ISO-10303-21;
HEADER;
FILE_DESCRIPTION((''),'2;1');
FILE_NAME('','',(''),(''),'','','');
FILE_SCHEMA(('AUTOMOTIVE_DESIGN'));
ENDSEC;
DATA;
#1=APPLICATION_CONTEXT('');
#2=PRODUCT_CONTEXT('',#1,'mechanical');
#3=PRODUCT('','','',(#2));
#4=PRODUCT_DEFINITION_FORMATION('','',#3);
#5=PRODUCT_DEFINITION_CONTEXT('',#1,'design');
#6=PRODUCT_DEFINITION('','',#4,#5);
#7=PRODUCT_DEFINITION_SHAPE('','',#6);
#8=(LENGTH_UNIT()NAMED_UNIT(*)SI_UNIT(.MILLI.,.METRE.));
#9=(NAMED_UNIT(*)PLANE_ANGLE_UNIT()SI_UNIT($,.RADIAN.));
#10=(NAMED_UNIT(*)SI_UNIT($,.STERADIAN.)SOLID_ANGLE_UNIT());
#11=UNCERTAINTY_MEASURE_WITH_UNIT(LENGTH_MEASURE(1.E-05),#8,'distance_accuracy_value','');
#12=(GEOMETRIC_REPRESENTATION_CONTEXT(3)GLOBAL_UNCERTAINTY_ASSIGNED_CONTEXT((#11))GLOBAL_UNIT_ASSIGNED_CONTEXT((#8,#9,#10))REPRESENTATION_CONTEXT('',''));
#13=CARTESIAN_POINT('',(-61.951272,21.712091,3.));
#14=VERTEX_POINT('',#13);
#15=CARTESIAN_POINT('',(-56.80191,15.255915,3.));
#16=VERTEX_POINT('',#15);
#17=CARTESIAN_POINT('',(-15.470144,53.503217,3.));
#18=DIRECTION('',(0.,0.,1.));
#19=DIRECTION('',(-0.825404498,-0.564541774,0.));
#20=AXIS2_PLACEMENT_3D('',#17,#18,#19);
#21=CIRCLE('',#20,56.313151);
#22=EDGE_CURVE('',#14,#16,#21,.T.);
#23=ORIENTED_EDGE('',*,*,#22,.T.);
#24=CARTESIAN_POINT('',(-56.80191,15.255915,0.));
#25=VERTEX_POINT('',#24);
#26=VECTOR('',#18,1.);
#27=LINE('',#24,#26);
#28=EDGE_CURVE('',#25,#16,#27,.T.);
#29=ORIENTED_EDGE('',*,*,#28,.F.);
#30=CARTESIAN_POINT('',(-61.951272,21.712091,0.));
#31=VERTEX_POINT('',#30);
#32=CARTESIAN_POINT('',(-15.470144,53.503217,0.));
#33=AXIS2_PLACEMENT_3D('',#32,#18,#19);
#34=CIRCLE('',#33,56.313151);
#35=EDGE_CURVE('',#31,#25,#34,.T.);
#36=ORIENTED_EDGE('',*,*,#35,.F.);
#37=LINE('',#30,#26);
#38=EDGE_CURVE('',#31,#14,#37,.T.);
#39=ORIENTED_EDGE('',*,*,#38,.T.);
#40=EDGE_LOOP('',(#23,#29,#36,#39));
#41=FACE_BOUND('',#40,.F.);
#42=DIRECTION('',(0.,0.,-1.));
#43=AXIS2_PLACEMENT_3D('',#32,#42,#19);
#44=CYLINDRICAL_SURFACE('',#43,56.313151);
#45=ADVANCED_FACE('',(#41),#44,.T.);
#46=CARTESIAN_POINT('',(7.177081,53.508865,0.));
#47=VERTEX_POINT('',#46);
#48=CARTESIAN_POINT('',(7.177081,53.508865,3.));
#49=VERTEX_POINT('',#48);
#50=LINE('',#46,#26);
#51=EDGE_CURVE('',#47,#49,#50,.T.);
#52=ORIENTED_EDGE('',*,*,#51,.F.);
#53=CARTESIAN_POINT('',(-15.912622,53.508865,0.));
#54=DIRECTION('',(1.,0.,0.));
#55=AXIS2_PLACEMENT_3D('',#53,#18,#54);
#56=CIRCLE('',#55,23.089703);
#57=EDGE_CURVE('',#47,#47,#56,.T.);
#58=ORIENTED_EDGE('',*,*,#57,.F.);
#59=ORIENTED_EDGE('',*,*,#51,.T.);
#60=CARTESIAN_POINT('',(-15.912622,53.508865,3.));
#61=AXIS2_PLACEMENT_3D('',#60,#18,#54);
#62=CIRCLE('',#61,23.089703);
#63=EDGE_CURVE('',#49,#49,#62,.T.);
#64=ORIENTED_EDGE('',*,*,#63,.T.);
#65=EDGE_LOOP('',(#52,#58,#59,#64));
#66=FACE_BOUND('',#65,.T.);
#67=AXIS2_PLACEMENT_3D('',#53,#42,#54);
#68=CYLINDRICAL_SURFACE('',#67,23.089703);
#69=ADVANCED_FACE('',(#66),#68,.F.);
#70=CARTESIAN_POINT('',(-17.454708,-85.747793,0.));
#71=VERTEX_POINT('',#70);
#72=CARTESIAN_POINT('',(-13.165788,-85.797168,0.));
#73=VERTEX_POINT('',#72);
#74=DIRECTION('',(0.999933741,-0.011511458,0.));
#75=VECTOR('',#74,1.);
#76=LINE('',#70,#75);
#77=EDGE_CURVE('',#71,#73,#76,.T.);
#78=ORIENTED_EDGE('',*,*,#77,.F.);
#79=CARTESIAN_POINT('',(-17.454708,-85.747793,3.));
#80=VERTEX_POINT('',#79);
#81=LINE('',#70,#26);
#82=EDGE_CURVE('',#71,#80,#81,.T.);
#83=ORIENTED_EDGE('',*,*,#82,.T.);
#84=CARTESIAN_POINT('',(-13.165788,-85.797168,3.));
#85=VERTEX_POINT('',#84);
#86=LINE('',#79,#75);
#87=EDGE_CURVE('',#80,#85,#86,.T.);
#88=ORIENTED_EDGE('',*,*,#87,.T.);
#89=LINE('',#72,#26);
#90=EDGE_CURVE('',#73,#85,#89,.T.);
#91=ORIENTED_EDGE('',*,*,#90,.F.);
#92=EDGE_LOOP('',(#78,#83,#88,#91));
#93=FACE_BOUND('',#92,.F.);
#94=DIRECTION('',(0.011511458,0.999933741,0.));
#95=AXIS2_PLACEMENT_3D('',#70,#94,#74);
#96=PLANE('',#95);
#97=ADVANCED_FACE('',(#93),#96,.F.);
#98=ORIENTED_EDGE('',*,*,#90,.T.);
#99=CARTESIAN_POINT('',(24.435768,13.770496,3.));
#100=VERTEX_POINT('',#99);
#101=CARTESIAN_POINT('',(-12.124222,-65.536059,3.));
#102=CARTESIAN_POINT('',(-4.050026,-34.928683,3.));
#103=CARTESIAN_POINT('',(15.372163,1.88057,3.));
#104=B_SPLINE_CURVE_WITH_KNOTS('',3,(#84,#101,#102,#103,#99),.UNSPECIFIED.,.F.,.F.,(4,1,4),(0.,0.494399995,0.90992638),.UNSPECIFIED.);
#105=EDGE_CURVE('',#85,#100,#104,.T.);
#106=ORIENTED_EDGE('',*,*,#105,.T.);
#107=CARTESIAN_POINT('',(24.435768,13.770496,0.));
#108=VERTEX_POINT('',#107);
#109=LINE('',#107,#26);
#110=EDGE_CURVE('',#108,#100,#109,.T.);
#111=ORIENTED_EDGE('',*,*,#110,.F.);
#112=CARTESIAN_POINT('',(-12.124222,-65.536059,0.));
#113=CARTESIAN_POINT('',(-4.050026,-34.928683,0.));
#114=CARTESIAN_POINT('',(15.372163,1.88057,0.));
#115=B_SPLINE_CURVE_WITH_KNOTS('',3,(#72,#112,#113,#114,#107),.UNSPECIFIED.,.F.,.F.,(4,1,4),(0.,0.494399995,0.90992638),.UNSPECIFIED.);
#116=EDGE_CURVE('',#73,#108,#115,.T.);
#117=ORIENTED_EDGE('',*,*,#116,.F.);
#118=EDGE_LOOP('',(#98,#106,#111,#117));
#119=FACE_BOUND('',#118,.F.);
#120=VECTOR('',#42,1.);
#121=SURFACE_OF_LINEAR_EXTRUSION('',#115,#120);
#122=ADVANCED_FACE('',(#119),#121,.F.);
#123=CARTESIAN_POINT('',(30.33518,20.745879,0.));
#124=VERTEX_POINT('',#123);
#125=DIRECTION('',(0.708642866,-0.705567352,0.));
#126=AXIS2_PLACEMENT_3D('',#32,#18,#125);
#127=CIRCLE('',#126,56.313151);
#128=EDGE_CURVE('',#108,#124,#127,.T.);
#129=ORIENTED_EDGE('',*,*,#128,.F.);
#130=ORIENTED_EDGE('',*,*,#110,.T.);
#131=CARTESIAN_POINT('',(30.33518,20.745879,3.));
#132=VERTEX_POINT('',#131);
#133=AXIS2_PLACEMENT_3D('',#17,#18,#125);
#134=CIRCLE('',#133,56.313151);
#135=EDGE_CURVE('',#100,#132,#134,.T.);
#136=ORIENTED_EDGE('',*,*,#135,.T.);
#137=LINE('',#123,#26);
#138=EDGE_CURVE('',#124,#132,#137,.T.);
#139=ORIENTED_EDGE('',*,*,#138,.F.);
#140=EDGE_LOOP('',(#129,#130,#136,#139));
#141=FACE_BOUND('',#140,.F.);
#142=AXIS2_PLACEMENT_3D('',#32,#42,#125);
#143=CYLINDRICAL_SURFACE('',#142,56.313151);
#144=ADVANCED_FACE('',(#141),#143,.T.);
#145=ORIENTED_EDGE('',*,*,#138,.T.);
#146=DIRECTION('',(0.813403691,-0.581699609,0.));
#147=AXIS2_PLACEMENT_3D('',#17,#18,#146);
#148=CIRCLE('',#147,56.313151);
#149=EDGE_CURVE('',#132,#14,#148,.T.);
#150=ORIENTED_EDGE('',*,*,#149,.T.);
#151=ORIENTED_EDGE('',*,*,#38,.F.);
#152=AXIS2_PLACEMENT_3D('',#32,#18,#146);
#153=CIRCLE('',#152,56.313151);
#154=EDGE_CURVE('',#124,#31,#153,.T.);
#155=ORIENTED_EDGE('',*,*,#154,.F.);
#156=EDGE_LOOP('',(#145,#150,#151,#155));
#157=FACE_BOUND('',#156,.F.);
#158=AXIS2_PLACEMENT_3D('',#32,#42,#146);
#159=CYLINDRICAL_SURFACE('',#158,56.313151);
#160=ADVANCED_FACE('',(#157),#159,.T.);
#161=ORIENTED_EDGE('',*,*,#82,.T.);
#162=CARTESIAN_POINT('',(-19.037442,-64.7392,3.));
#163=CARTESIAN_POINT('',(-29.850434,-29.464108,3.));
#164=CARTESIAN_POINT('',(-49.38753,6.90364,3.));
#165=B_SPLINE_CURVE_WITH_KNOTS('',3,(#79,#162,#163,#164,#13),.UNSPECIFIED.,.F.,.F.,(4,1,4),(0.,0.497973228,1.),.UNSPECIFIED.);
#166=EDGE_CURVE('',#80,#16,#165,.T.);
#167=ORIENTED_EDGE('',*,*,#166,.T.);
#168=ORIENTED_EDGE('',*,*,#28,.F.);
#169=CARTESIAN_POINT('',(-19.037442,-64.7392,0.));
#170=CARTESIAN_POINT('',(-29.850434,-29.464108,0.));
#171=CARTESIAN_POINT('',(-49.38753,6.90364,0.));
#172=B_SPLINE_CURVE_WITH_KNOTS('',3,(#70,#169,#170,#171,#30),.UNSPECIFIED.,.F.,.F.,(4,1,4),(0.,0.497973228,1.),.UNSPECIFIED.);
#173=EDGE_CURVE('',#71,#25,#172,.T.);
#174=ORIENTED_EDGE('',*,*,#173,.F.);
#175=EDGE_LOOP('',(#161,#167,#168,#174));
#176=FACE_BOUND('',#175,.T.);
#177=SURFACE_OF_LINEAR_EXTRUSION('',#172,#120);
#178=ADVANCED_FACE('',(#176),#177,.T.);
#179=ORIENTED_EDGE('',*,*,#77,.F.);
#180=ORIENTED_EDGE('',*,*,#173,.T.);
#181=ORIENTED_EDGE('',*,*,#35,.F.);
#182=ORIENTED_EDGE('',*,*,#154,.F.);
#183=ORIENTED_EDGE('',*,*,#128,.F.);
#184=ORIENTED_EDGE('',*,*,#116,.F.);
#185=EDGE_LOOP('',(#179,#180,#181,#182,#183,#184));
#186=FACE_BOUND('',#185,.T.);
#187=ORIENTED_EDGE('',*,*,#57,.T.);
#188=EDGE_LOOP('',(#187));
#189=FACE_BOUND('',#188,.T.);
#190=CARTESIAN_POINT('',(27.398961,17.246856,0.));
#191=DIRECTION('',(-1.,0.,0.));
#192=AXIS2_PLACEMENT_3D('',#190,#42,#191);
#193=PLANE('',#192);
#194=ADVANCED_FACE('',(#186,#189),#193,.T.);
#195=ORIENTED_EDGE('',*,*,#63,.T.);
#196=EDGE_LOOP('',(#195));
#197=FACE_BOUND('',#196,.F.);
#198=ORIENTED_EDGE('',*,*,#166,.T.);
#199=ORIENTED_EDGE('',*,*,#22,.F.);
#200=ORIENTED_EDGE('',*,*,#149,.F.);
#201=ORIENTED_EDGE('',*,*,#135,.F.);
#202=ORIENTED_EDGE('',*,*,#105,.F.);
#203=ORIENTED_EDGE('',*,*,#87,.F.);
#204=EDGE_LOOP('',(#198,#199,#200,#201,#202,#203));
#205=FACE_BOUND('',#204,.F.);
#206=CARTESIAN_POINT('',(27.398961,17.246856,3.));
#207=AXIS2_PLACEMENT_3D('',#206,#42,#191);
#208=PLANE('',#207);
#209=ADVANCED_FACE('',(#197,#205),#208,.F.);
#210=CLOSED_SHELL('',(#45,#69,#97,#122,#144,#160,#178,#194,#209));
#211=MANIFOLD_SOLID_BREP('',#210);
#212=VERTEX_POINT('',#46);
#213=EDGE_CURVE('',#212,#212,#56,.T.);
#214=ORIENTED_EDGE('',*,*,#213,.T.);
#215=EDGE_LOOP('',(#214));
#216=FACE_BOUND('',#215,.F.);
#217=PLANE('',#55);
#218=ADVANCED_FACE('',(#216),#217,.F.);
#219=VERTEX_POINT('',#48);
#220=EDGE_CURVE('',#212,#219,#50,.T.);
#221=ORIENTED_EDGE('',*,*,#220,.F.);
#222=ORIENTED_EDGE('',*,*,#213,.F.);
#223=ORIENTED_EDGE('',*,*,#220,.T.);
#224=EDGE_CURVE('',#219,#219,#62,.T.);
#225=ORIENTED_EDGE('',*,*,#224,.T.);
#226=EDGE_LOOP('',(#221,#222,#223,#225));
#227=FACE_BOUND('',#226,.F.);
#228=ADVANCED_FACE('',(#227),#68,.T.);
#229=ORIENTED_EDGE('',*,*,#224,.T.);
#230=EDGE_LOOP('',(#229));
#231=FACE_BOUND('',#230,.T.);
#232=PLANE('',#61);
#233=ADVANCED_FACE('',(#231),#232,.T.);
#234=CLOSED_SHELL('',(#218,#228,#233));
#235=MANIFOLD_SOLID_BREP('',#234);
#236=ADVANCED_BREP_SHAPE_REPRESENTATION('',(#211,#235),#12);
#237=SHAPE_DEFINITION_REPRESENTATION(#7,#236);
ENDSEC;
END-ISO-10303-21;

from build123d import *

# Parameters (mm, degrees)
F2_R     = 23.0897028216
F3_DEPTH = 3
F0_R     = 23.0897028216
F4_DEPTH = 3


# Not quite as in the source:
# - the dataset's text gives a spline's control points without its knots; the knots are read off the source's solid


with BuildPart() as f3:
    # F2 (on face) → F3 (new body)
    with BuildSketch(Plane.XY):
        with BuildLine():
            add(Edge.make_bspline(
                [(24.4357683195, 13.7704961499), (26.4004851942, 16.3478745215), (28.3743311543, 18.6940959772), (30.3351804614, 20.7458790392)],
                knots=[0.9099263798, 0.9099263798, 0.9099263798, 0.9099263798, 1, 1, 1, 1], degree=3))
            ThreePointArc((24.4357683195, 13.7704961499), (27.527158464, 17.1383586537), (30.3351804614, 20.7458790392))
        make_face()
        with BuildLine():
            add(Edge.make_bspline(
                [(-13.1657877937, -85.7971683145), (-12.124221772, -65.5360594392), (-4.0500259711, -34.9286832493), (15.3721634866, 1.8805697355), (24.4357683195, 13.7704961499)],
                knots=[0, 0, 0, 0, 0.4943999951, 0.9099263798, 0.9099263798, 0.9099263798, 0.9099263798], degree=3))
            add(Edge.make_bspline(
                [(24.4357683195, 13.7704961499), (26.4004851942, 16.3478745215), (28.3743311543, 18.6940959772), (30.3351804614, 20.7458790392)],
                knots=[0.9099263798, 0.9099263798, 0.9099263798, 0.9099263798, 1, 1, 1, 1], degree=3))
            ThreePointArc((30.3351804614, 20.7458790392), (-14.8805945591, 109.8132814972), (-61.9512721896, 21.7120908201))
            add(Edge.make_bspline(
                [(-56.8019096606, 15.2559147606), (-58.4646697135, 17.4695314371), (-60.1806042841, 19.6250655082), (-61.9512721896, 21.7120908201)],
                knots=[0.9292469814, 0.9292469814, 0.9292469814, 0.9292469814, 1, 1, 1, 1], degree=3))
            add(Edge.make_bspline(
                [(-17.4547079951, -85.7477933168), (-19.0374422117, -64.7392000389), (-29.0853821507, -31.9599274574), (-46.6665856361, 1.7628540852), (-56.8019096606, 15.2559147606)],
                knots=[0, 0, 0, 0, 0.497973228, 0.9292469814, 0.9292469814, 0.9292469814, 0.9292469814], degree=3))
            Line((-17.4547079951, -85.7477933168), (-13.1657877937, -85.7971683145))
        make_face()
        with Locations((-15.9126216176, 53.508865199)):
            Circle(F2_R, mode=Mode.SUBTRACT)
        with BuildLine():
            add(Edge.make_bspline(
                [(-56.8019096606, 15.2559147606), (-58.4646697135, 17.4695314371), (-60.1806042841, 19.6250655082), (-61.9512721896, 21.7120908201)],
                knots=[0.9292469814, 0.9292469814, 0.9292469814, 0.9292469814, 1, 1, 1, 1], degree=3))
            ThreePointArc((-61.9512721896, 21.7120908201), (-59.4950986731, 18.3894825431), (-56.8019096606, 15.2559147606))
        make_face()
    extrude(amount=F3_DEPTH)


with BuildPart() as f4:
    # F0 (on Top) → F4 (new body)
    with BuildSketch(Plane.XY):
        with Locations((-15.9126216176, 53.508865199)):
            Circle(F0_R)
    extrude(amount=F4_DEPTH)


solid = Compound([f3.part, f4.part])
